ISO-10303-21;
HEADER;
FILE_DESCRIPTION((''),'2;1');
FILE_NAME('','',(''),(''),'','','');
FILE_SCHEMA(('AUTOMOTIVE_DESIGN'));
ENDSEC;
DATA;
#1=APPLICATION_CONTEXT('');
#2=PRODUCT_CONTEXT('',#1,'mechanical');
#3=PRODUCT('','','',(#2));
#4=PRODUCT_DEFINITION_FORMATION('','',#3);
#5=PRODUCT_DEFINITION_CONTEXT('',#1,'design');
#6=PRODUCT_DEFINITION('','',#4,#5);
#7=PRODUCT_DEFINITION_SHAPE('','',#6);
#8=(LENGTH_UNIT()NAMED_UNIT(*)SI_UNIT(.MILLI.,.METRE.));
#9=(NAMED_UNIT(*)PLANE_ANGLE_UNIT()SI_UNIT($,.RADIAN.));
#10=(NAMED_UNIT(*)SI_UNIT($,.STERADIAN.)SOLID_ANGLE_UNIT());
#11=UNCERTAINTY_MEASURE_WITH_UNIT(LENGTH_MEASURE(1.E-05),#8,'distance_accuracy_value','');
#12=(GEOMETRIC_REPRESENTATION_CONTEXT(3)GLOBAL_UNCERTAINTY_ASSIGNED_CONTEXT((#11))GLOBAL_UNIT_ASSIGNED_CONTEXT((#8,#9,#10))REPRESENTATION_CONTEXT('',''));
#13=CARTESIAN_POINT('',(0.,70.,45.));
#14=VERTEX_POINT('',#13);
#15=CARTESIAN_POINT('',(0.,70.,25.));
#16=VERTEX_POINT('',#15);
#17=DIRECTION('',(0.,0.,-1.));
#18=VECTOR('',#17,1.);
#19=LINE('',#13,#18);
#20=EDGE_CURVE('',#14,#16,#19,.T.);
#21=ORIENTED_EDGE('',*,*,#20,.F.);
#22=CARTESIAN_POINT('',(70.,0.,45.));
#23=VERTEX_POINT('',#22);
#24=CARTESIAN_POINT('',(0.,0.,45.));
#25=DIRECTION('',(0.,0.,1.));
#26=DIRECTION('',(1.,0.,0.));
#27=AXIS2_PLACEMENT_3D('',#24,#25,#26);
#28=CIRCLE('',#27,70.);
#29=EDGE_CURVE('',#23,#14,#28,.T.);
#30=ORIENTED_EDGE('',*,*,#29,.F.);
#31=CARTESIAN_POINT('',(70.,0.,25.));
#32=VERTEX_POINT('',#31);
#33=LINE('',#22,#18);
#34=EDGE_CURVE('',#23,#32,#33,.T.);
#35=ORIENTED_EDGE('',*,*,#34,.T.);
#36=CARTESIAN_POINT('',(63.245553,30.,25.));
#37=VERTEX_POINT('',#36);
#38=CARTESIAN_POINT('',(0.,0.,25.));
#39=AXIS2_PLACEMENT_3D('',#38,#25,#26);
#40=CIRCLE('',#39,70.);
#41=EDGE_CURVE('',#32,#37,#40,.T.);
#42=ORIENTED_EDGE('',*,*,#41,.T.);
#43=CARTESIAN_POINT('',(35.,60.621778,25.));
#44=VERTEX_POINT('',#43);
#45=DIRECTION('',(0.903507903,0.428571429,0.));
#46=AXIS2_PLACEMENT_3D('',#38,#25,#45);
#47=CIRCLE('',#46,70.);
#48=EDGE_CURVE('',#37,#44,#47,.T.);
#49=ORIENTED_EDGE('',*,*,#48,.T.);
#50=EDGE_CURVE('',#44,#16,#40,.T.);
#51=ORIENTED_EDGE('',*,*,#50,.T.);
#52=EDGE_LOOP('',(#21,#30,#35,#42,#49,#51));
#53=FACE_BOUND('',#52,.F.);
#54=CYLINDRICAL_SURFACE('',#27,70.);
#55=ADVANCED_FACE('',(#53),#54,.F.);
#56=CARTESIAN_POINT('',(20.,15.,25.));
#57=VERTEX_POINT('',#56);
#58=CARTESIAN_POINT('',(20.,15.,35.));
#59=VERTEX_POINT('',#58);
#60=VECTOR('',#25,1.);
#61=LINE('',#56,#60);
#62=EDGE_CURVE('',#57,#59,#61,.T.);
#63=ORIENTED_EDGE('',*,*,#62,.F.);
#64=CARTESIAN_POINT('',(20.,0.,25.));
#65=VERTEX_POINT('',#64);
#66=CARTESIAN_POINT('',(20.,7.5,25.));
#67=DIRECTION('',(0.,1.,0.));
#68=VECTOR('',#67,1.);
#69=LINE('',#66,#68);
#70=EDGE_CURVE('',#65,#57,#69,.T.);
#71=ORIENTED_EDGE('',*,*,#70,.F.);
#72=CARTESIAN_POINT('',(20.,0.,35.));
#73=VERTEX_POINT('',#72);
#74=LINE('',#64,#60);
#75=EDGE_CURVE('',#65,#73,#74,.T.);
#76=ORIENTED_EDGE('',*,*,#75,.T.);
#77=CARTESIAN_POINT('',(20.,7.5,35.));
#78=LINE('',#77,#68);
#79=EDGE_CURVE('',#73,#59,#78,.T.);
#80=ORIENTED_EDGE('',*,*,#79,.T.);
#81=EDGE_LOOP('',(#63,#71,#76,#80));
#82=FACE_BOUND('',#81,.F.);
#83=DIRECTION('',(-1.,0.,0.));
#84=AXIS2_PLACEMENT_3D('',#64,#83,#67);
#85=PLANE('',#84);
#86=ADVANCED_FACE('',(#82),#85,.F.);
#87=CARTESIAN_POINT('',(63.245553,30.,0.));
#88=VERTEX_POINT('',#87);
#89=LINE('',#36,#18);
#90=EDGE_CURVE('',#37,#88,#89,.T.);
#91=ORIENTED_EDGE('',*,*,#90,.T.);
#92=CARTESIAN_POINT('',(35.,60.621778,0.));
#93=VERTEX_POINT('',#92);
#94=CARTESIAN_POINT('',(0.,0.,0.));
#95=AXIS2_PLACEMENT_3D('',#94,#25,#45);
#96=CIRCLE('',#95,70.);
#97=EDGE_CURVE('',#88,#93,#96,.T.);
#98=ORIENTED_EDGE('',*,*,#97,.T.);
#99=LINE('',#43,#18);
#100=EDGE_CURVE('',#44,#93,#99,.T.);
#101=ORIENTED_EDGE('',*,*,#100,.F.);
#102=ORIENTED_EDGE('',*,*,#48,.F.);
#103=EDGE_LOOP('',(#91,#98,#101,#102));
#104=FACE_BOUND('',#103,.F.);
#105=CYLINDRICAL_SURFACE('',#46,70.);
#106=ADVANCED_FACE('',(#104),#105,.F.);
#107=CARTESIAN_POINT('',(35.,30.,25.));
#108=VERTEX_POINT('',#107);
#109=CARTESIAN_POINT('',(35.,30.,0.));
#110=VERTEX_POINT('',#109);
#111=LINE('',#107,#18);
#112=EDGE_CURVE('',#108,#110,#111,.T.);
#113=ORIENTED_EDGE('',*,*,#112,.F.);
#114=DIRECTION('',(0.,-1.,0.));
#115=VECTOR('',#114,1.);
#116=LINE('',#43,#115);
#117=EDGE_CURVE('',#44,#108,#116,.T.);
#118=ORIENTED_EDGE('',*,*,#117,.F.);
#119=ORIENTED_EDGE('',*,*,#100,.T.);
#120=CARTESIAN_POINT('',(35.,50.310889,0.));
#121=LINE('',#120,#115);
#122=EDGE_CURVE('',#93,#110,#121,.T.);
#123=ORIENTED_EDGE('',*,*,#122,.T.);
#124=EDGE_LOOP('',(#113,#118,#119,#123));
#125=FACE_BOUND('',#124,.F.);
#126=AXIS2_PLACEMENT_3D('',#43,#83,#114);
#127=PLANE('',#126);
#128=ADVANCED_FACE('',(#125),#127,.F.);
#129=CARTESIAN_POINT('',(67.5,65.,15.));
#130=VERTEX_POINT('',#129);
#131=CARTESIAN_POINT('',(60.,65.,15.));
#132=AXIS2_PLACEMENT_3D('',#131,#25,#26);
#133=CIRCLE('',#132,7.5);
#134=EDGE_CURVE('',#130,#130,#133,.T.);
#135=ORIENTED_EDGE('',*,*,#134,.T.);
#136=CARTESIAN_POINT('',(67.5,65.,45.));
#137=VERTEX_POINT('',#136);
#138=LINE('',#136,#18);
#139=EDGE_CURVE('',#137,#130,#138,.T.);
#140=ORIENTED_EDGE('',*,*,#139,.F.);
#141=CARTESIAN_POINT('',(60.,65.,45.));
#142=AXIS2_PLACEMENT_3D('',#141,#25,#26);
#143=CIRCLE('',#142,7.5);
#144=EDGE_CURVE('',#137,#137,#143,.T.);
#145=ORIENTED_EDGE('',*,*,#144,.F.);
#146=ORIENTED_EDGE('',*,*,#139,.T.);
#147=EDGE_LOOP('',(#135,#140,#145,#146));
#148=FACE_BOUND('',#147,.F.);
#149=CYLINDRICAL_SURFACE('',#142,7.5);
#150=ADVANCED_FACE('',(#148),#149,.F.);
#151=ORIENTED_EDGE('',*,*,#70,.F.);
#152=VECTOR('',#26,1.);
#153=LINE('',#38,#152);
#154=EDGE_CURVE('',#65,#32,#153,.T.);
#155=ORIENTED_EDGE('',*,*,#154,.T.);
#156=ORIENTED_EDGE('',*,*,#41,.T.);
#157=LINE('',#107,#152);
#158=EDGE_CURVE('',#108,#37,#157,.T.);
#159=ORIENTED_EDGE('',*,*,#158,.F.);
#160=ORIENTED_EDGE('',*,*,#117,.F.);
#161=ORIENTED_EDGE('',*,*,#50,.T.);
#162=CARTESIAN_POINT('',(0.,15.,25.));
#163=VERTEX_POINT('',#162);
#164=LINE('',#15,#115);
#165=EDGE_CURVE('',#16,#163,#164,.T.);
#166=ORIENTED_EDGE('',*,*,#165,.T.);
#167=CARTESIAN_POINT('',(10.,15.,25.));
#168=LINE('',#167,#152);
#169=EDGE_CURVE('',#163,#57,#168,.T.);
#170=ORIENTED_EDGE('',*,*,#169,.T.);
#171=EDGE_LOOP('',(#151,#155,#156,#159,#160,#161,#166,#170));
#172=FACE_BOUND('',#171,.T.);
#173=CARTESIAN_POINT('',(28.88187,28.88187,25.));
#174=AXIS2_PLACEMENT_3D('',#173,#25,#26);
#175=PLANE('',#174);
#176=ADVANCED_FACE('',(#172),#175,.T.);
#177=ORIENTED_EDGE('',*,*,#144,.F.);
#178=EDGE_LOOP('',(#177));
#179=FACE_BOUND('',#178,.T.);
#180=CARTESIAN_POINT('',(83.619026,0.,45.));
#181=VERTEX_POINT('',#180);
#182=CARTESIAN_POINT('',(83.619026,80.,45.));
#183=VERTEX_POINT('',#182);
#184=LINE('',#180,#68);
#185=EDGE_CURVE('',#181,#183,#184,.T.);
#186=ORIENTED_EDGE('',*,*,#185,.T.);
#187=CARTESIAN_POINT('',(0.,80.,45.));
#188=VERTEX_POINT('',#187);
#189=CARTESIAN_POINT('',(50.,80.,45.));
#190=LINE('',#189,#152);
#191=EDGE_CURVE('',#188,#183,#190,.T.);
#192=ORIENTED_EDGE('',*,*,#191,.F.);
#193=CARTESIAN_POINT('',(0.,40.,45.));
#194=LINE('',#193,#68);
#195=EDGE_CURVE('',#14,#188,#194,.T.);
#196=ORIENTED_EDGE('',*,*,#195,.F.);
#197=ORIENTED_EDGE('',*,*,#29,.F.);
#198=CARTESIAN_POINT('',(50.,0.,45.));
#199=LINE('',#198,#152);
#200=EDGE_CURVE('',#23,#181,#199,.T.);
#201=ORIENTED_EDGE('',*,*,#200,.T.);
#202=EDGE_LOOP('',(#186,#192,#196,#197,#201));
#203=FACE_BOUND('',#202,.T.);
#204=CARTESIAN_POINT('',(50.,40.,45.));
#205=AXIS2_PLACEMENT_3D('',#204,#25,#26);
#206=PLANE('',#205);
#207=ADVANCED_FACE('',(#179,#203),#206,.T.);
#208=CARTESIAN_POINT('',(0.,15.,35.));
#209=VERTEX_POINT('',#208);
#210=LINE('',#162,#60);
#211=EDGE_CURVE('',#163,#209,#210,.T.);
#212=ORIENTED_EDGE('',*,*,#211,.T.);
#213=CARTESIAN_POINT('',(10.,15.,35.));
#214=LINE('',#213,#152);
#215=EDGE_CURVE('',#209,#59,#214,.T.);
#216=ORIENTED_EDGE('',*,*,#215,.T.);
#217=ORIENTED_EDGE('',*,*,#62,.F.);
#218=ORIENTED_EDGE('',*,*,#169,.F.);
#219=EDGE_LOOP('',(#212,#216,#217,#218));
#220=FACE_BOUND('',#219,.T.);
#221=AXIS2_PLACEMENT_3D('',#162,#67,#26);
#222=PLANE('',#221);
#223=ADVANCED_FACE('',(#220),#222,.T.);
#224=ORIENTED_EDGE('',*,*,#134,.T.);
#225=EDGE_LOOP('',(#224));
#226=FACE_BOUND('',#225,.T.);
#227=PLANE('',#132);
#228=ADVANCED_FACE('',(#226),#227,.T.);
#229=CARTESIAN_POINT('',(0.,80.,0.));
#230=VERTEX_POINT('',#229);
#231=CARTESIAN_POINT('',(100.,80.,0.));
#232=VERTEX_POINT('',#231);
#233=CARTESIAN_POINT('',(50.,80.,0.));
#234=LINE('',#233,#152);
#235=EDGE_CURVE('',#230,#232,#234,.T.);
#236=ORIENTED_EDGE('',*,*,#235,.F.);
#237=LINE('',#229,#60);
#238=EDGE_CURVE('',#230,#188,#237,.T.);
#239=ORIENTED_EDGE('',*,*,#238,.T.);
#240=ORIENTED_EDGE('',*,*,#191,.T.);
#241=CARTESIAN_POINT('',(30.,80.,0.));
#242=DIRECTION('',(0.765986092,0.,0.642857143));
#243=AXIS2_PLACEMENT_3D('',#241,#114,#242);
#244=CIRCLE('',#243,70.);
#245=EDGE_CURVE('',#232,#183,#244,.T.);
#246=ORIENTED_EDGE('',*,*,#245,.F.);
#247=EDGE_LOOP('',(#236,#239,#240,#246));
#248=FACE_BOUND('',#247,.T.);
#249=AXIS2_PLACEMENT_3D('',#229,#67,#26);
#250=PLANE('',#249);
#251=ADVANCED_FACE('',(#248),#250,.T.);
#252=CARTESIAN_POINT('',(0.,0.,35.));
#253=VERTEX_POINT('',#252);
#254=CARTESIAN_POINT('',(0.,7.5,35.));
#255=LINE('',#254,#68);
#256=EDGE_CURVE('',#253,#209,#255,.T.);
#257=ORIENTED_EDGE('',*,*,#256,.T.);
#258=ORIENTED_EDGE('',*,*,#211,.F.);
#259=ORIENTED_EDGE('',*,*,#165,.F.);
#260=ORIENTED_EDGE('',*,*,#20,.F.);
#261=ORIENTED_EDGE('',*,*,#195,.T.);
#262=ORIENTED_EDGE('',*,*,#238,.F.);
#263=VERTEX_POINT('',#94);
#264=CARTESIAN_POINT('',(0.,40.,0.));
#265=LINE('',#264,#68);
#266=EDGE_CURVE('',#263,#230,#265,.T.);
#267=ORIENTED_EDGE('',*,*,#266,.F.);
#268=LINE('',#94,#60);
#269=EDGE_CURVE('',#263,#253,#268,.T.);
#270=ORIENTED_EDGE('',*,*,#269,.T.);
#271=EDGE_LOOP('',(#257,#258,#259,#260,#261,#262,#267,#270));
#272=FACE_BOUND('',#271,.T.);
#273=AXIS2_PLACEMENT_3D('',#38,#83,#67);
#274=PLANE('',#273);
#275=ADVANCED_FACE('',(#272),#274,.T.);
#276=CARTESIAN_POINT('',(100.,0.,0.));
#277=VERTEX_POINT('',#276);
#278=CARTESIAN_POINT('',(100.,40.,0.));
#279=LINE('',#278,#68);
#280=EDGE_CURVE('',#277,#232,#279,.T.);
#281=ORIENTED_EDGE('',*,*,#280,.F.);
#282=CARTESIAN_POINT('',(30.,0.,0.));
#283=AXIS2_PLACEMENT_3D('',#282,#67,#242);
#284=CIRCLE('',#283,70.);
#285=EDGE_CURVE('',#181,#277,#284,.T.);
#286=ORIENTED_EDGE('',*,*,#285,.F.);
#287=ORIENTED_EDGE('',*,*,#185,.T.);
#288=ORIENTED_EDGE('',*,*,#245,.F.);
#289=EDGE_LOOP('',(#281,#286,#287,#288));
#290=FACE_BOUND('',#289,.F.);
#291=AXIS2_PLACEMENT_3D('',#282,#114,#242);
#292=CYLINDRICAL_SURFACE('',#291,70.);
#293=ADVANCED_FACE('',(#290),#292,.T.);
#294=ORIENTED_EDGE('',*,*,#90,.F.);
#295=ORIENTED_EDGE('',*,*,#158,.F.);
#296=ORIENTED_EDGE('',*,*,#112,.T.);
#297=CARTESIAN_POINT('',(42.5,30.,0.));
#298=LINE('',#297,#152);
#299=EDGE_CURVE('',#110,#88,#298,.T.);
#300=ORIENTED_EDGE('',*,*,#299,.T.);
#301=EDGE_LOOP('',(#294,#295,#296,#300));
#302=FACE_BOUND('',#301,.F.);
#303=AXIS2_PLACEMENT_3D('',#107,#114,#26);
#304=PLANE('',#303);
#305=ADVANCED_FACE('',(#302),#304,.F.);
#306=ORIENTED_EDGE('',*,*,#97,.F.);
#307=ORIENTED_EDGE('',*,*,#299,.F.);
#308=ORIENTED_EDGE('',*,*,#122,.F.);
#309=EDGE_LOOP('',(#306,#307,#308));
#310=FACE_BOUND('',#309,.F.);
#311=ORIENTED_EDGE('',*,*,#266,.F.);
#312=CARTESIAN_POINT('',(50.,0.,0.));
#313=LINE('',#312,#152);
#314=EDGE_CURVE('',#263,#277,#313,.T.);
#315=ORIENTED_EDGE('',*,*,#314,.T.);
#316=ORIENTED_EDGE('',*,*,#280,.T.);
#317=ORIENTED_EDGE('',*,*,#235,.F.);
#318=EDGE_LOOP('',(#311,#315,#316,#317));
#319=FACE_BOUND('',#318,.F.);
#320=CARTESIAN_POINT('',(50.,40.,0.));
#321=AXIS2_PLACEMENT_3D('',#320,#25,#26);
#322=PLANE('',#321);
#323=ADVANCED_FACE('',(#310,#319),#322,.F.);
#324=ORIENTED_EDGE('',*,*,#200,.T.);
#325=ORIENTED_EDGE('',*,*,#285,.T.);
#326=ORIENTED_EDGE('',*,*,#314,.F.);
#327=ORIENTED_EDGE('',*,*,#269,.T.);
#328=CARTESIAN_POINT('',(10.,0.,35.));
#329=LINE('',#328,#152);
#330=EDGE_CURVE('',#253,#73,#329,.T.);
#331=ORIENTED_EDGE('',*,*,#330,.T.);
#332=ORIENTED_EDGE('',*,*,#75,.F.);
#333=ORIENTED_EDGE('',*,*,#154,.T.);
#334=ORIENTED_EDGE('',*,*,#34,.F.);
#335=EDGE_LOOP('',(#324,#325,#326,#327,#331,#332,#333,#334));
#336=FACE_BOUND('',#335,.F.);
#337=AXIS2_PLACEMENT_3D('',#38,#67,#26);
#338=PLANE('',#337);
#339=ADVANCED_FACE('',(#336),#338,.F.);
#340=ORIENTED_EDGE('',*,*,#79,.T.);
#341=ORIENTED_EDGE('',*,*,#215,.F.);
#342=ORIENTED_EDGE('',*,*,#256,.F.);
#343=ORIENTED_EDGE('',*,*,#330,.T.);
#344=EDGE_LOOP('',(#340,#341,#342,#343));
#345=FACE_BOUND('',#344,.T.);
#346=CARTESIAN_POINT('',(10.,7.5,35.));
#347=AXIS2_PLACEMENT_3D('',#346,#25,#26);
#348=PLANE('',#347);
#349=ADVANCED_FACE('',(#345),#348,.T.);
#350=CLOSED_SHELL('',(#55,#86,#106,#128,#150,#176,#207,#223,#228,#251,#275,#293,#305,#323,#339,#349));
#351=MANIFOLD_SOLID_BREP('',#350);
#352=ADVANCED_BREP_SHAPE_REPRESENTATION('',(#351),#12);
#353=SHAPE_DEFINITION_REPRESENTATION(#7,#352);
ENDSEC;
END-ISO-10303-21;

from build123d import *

# Parameters (mm, degrees)
F0_W      = 100
F0_H      = 80
F1_DEPTH  = 45
F3_DEPTH  = 20
F4_W      = 20
F4_H      = 15
F5_DEPTH  = 10
F7_DEPTH  = 25.001
F8_R      = 7.5
F9_DEPTH  = 30
F11_DEPTH = 80.001


# Not quite as in the source:
# - a feature names something its author has since deleted; it is built from what else it names


with BuildPart() as f1:
    # F0 (on Top) → F1 (new body)
    with BuildSketch(Plane.XY):
        with Locations((50, 40)):
            Rectangle(F0_W, F0_H)
    extrude(amount=F1_DEPTH)

    # F2 (on face) → F3 (cut)
    with BuildSketch(Plane.XY.offset(45)):
        with BuildLine():
            Line((0, 0), (70, 0))
            ThreePointArc((70, 0), (49.4974746831, 49.4974746831), (0, 70))
            Line((0, 70), (0, 0))
        make_face()
    extrude(amount=-F3_DEPTH, mode=Mode.SUBTRACT)

    # F4 (on face) → F5 (join)
    with BuildSketch(Plane.XY.offset(25)):
        with Locations((10, 7.5)):
            Rectangle(F4_W, F4_H)
    extrude(amount=F5_DEPTH)

    # F6 (on face) → F7 (cut, through all)
    with BuildSketch(Plane.XY.offset(25)):
        with BuildLine():
            Line((35, 60.6217782649), (35, 30))
            Line((35, 30), (63.2455532034, 30))
            ThreePointArc((63.2455532034, 30), (51.4535762322, 47.4608206094), (35, 60.6217782649))
        make_face()
    extrude(amount=-F7_DEPTH, mode=Mode.SUBTRACT)

    # F8 (on face) → F9 (cut)
    with BuildSketch(Plane.XY.offset(45)):
        with Locations((60, 65)):
            Circle(F8_R)
    extrude(amount=-F9_DEPTH, mode=Mode.SUBTRACT)

    # F10 (on face) → F11 (cut, through all)
    with BuildSketch(Plane.XZ):
        with BuildLine():
            ThreePointArc((83.6190264738, 45), (95.7773967757, 23.944395449), (100, 0))
            Line((100, 0), (100, 45))
            Line((100, 45), (83.6190264738, 45))
        make_face()
    extrude(amount=-F11_DEPTH, mode=Mode.SUBTRACT)


solid = f1.part
